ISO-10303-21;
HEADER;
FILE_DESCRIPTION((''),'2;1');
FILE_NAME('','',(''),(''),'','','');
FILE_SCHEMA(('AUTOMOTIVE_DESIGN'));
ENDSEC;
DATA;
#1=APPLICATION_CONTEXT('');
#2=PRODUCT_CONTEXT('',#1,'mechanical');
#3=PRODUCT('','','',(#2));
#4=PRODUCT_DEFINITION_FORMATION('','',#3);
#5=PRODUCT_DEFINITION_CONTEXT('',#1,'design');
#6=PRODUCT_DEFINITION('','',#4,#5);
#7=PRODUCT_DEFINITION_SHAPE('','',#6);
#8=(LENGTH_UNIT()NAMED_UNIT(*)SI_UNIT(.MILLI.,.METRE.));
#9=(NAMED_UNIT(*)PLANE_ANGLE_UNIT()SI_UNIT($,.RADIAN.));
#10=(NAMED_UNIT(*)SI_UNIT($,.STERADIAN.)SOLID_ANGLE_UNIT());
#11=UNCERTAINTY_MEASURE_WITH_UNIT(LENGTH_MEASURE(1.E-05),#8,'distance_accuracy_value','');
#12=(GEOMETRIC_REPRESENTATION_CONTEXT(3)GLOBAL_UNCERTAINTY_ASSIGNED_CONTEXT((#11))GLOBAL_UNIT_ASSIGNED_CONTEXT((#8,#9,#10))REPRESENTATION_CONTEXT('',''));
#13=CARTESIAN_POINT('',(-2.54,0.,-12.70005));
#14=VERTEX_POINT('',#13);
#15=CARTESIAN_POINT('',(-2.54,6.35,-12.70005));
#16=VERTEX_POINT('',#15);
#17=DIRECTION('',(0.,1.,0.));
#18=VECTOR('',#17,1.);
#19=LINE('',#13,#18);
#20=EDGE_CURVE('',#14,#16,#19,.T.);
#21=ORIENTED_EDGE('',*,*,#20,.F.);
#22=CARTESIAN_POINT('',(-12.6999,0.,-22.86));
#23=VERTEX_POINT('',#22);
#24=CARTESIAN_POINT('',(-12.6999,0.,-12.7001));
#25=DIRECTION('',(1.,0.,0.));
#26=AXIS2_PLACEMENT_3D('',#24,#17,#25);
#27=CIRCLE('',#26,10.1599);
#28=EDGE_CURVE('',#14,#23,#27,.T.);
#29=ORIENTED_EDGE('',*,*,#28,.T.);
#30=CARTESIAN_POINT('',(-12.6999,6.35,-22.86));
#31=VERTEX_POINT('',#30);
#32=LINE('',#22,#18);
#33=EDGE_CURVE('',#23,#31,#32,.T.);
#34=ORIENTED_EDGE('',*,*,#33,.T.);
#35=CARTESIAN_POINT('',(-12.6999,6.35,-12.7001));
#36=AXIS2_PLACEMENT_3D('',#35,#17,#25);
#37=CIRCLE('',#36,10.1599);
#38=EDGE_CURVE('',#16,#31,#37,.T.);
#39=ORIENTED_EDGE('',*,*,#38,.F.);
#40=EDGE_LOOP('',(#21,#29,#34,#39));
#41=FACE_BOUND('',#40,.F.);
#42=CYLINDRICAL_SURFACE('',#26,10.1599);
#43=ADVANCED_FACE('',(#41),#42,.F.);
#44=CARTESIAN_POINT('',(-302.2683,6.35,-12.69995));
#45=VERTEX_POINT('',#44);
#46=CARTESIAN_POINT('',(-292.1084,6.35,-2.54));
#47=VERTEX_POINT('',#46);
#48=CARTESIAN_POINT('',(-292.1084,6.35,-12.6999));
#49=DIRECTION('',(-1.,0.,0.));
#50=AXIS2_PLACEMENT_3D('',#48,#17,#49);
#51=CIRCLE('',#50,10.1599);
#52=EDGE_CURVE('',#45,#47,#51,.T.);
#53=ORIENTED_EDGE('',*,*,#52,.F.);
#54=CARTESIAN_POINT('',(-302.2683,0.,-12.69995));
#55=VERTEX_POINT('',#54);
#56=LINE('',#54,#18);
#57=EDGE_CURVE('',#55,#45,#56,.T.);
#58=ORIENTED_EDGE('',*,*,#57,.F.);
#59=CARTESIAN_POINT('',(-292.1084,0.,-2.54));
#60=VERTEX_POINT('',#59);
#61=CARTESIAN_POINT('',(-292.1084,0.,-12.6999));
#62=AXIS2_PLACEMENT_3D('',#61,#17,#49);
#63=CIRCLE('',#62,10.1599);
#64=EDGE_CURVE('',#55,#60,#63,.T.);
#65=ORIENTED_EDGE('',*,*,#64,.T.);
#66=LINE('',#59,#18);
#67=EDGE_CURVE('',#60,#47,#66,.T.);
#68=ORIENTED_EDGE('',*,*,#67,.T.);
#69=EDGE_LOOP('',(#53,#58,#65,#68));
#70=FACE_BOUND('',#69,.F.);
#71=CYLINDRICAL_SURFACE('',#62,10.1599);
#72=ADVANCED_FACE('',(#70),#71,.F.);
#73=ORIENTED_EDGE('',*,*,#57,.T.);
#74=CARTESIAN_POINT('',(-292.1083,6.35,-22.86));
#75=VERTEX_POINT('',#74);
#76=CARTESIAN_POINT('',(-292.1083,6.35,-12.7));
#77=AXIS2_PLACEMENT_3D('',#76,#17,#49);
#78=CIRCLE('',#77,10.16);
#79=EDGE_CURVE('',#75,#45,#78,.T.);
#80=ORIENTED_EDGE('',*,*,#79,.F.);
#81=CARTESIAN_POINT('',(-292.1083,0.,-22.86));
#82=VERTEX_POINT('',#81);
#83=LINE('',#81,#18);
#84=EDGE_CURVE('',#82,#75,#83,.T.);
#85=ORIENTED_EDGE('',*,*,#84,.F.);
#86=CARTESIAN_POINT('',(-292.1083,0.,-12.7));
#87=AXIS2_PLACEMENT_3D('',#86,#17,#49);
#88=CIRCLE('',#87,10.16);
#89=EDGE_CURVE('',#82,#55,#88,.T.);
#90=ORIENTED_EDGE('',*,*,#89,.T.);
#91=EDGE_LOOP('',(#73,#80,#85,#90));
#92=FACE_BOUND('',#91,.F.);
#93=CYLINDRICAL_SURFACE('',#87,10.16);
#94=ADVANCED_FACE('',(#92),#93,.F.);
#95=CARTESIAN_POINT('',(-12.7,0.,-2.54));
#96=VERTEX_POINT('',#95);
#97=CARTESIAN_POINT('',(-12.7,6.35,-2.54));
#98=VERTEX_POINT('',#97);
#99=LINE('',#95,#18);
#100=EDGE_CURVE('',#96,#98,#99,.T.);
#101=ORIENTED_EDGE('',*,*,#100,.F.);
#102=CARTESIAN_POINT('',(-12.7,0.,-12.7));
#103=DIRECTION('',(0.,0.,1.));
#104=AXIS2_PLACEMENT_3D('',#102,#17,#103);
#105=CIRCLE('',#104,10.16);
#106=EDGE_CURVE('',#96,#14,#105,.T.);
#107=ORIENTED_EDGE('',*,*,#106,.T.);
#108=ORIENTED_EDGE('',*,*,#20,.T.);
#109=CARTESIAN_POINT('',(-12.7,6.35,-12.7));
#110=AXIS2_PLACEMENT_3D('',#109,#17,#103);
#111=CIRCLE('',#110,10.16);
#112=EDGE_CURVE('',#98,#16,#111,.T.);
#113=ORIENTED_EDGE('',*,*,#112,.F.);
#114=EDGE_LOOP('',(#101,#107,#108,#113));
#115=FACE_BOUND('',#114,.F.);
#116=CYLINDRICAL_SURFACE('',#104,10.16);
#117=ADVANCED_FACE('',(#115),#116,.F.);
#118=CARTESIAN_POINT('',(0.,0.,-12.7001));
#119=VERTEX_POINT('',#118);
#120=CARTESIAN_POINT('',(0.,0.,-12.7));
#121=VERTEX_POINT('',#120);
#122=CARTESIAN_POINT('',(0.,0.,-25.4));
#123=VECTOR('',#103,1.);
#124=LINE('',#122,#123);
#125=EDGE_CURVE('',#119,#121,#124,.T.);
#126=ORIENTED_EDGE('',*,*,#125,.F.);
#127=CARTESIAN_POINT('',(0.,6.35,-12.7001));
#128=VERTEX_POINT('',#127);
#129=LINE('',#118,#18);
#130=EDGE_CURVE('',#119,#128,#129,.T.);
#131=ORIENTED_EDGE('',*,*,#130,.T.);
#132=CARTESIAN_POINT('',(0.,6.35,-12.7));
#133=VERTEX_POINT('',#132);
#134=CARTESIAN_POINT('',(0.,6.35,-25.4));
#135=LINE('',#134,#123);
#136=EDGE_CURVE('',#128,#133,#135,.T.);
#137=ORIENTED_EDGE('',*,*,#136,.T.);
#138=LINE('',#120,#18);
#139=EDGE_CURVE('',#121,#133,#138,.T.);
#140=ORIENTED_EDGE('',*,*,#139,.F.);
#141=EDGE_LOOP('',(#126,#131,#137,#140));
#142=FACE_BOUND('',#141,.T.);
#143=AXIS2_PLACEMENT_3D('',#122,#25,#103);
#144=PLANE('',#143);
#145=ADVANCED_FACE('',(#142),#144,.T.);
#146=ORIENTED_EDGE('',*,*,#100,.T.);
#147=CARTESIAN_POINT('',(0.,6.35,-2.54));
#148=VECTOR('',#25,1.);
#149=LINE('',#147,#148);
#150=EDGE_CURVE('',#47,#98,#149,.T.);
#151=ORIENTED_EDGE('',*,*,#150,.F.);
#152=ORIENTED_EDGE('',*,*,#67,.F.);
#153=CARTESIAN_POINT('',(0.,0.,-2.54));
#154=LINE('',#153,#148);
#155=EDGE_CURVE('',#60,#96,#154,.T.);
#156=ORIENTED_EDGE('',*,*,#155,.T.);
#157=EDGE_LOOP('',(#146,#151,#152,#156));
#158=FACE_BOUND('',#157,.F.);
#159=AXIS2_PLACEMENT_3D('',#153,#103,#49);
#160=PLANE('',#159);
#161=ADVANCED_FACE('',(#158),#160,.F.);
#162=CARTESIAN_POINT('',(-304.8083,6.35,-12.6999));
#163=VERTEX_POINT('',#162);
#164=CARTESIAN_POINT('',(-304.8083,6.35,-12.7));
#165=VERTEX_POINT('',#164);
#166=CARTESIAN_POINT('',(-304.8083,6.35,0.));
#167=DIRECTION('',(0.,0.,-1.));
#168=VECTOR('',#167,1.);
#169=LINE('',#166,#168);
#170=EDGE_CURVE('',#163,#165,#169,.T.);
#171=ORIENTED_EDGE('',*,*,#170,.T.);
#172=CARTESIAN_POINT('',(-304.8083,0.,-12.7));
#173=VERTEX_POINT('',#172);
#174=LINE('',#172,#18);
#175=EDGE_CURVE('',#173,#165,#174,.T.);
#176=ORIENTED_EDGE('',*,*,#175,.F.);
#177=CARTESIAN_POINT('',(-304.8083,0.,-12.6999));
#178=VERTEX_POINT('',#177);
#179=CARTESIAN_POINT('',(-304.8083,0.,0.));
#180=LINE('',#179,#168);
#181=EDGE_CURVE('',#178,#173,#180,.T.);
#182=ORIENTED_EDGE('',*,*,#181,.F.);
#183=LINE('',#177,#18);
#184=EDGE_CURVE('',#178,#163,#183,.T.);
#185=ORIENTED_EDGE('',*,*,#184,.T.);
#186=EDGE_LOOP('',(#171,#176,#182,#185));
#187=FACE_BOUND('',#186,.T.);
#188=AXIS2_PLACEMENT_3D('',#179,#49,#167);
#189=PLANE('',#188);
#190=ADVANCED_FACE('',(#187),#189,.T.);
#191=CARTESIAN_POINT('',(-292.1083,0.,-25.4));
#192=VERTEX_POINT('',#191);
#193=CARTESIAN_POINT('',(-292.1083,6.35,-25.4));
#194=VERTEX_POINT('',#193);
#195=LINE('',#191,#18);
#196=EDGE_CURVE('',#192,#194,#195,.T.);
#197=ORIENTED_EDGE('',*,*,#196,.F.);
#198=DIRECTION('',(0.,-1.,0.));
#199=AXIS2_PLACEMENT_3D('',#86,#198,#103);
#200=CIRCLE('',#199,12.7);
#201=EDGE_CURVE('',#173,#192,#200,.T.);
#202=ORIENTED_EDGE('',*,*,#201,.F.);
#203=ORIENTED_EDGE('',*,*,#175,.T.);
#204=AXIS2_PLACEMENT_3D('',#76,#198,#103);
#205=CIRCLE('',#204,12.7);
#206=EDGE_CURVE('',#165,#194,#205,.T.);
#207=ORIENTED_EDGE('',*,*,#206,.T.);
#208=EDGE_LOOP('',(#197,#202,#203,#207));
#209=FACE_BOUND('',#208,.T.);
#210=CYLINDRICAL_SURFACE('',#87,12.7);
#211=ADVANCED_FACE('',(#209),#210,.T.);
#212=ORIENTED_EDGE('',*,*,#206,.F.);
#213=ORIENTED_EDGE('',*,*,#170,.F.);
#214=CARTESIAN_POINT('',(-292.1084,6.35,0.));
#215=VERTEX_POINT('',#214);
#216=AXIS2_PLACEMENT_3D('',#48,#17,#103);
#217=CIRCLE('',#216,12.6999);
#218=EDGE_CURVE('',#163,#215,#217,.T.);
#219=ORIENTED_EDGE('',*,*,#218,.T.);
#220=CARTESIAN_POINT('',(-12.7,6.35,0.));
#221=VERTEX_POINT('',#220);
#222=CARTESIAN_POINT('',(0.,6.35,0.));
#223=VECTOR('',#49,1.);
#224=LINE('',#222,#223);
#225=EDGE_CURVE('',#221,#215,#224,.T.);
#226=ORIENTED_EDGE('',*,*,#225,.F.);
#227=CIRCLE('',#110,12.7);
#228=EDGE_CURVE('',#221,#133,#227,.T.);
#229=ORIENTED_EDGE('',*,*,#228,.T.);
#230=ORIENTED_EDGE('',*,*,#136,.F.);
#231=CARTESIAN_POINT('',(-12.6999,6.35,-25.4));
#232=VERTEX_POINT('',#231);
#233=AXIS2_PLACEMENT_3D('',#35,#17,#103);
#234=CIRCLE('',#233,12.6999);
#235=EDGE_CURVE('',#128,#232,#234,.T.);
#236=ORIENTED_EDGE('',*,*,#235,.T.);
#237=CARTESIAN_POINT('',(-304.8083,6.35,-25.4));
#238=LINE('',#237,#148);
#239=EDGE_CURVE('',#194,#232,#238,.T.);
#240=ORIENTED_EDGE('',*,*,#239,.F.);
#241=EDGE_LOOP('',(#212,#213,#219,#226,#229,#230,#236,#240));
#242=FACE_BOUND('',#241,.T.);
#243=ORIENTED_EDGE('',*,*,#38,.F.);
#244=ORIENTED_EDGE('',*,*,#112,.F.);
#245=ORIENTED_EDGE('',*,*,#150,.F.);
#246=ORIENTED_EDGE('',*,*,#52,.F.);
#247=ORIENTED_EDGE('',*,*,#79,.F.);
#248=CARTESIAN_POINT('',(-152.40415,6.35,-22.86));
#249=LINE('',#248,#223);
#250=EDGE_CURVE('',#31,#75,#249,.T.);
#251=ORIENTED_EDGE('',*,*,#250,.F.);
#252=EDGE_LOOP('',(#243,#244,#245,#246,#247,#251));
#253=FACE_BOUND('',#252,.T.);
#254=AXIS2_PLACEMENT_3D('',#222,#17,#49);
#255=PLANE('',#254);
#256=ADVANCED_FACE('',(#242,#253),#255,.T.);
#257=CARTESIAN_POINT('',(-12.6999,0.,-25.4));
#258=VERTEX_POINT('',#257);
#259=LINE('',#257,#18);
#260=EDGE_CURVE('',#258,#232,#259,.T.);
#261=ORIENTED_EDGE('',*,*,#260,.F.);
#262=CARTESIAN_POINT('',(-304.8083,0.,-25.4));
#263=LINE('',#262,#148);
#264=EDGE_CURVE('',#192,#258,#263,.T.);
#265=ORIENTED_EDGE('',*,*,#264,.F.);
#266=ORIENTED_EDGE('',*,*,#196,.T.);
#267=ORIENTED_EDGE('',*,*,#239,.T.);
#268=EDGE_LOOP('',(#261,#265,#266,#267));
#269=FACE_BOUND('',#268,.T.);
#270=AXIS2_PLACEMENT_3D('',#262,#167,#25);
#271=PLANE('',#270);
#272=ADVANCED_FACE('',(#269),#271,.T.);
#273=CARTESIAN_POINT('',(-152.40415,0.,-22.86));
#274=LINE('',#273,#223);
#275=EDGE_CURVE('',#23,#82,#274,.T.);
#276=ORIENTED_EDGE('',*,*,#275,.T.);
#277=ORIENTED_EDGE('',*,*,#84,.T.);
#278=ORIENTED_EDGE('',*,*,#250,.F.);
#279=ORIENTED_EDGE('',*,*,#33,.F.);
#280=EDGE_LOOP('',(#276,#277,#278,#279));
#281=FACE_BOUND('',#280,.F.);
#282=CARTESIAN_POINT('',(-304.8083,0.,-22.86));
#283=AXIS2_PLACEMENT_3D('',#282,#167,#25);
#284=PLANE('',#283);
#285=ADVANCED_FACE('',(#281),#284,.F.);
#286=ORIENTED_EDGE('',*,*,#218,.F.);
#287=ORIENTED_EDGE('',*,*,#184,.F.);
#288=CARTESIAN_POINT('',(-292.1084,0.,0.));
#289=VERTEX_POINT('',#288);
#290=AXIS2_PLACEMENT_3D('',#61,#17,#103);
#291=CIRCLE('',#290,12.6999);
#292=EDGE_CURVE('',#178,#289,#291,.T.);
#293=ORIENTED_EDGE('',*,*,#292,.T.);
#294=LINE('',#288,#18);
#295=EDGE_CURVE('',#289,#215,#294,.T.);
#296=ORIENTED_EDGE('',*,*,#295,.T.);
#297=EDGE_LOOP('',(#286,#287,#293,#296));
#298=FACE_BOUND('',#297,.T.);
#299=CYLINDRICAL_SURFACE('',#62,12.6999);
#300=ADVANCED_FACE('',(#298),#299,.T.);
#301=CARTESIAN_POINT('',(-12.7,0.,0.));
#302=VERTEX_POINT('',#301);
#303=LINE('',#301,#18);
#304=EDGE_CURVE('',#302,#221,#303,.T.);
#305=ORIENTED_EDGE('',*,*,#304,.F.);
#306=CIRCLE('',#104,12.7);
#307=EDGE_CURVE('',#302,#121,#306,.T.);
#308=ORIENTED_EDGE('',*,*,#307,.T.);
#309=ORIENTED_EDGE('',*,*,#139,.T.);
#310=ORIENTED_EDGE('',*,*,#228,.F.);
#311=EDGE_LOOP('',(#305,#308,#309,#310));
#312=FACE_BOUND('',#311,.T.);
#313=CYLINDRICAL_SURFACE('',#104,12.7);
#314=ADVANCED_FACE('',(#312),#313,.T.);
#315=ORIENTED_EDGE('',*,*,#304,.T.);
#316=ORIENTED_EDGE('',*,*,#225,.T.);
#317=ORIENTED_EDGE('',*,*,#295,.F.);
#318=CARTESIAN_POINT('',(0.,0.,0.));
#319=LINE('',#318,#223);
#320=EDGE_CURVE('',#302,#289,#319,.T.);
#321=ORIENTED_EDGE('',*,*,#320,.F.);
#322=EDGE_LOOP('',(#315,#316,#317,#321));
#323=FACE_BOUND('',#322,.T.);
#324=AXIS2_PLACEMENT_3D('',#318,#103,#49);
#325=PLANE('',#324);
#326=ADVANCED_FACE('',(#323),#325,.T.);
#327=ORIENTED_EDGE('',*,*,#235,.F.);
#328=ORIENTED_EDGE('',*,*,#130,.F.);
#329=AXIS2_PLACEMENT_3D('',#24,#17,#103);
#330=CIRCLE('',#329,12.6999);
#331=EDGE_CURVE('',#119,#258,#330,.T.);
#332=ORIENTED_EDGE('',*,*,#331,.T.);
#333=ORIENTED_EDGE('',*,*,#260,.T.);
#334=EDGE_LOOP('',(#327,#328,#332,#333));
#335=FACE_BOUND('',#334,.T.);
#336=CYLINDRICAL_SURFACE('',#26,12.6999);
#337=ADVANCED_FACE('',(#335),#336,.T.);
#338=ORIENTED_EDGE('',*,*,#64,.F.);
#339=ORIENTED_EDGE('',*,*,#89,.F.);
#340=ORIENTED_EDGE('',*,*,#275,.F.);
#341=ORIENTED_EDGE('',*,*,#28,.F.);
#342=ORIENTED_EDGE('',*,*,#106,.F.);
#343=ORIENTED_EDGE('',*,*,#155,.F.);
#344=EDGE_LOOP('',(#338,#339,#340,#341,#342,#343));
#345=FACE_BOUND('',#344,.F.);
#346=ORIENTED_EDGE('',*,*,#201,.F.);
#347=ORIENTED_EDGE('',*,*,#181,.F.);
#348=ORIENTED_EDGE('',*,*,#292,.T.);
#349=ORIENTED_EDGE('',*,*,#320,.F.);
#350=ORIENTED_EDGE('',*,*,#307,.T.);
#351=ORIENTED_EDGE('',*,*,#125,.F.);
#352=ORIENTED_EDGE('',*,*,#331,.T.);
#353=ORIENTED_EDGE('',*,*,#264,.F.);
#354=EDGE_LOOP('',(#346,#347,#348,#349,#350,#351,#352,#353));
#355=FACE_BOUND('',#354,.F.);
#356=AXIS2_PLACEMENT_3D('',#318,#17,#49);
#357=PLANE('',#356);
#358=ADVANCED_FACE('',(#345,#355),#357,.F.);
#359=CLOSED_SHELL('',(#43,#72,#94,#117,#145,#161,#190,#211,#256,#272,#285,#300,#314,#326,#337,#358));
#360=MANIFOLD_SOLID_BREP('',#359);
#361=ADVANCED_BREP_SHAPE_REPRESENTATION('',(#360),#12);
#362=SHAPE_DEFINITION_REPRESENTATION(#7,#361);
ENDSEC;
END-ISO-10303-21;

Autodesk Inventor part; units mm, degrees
ref_plane "YZ Plane" through (0, 0, 0) normal (1, 0, 0) x (0, 1, 0)
ref_plane "XZ Plane" through (0, 0, 0) normal (0, 1, 0) x (-1, 0, 0)
ref_plane "XY Plane" through (0, 0, 0) normal (0, 0, 1) x (1, 0, 0)
sketch "Sketch1" plane through (0, 0, 0) normal (0, 1, 0) x (-1, 0, 0)
  line L0 (0, 0) -> (304.8083, 0)
  line L1 (304.8083, 0) -> (304.8083, -25.4)
  line L2 (304.8083, -25.4) -> (0, -25.4)
  line L3 (0, -25.4) -> (0, 0)
  dimension "d0" = 25.4
extrude "Extrusion1" add sketch "Sketch1" along normal blind 6.35
fillet "Fillet1" radius 12.7 1 edges at (-304.8083, 3.175, -25.4)
fillet "Fillet2" radius 12.7 1 edges at (-304.8083, 3.175, 0)
fillet "Fillet3" radius 12.7 1 edges at (0, 3.175, 0)
fillet "Fillet4" radius 12.7 1 edges at (0, 3.175, -25.4)
shell "Shell1" thickness 2.54 removed faces 2 at (-198.9723, 6.35, -8.4667) at (-198.9723, 0, -8.4667)
properties part number "LiftLineWire"
